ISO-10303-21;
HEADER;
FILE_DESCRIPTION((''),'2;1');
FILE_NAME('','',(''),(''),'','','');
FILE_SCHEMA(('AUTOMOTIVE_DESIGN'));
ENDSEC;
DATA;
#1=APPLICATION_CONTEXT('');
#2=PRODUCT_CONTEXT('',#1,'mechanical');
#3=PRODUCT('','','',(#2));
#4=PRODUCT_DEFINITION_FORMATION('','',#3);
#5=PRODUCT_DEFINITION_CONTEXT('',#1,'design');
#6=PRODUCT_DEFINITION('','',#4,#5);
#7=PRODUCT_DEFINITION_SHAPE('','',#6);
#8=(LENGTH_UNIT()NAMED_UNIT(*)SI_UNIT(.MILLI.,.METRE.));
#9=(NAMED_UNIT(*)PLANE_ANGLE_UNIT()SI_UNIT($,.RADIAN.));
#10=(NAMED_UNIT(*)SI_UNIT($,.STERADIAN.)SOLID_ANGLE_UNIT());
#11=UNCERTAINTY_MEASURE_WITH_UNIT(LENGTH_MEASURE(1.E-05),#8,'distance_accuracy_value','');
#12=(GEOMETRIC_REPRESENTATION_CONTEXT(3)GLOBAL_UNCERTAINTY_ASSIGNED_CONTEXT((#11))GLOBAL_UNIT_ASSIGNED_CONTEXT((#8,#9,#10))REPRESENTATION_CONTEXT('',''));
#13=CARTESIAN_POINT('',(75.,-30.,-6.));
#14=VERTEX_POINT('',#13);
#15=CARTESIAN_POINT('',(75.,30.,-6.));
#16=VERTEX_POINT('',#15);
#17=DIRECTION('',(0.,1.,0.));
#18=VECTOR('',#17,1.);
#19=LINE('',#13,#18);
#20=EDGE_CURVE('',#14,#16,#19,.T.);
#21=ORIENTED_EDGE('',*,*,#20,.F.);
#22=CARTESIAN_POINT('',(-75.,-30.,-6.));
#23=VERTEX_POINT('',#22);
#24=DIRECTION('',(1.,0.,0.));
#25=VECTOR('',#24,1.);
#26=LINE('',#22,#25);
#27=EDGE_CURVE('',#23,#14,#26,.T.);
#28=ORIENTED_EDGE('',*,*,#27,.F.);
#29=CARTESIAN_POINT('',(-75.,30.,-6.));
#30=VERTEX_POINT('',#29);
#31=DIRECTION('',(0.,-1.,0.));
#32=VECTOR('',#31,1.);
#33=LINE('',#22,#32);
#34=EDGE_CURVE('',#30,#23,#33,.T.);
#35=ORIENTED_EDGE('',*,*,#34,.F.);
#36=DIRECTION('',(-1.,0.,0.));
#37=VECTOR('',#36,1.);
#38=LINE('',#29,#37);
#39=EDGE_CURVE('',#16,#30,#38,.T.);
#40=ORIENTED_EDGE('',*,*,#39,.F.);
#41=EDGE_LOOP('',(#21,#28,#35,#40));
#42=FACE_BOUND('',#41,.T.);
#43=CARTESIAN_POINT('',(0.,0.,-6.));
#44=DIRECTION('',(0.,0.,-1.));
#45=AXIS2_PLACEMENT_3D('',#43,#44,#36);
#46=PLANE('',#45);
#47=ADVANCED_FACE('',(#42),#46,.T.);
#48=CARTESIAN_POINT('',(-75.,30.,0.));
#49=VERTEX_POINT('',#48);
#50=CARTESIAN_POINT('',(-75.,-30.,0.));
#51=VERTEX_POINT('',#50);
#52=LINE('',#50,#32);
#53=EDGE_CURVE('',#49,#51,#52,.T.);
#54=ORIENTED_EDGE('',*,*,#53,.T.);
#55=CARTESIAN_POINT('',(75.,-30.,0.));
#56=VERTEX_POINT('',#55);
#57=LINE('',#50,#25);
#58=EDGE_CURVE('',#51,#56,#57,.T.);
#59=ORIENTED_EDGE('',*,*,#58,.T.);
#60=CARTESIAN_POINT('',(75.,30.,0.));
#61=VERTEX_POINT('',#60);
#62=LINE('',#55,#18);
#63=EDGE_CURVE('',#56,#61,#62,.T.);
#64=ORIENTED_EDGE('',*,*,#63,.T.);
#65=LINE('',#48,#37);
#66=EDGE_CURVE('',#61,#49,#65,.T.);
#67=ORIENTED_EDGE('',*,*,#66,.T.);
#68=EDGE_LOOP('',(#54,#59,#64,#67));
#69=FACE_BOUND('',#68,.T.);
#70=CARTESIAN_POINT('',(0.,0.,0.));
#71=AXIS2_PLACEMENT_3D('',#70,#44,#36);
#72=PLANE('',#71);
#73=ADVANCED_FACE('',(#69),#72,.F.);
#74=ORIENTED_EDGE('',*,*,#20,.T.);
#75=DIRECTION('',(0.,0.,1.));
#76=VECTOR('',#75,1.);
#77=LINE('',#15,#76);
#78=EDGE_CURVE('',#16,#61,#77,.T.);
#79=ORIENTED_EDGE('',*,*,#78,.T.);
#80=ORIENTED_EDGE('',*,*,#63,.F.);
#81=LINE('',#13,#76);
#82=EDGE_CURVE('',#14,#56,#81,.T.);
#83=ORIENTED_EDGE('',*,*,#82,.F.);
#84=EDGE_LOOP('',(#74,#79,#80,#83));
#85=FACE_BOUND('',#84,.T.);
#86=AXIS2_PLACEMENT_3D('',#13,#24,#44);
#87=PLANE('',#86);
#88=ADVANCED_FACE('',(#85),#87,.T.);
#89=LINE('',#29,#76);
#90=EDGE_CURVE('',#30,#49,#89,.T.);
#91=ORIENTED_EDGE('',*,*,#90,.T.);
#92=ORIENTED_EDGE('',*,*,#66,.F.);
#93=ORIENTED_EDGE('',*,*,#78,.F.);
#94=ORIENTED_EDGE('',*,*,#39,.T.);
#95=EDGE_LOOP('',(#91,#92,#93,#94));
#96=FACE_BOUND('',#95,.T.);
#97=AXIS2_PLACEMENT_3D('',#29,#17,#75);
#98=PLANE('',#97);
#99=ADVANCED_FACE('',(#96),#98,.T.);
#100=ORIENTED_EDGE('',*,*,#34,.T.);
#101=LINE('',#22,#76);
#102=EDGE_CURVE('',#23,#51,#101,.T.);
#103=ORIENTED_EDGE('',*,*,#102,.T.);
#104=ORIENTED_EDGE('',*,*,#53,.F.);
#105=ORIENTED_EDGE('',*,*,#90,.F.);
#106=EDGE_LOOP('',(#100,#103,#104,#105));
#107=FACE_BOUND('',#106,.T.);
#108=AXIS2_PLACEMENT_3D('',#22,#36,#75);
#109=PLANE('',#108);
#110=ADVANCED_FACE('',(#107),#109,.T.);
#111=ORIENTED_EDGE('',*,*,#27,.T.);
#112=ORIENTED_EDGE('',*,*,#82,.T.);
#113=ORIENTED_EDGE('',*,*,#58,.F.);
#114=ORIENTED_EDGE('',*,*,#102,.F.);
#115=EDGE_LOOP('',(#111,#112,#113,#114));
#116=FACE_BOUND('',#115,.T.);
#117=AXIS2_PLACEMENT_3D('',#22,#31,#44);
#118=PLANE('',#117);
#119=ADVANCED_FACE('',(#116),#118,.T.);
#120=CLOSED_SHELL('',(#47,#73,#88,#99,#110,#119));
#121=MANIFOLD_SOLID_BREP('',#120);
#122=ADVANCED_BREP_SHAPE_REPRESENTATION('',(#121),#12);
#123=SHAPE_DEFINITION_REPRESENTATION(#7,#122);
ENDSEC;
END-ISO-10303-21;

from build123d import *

# Parameters (mm, degrees)
SKETCH_1_W             = 150
SKETCH_1_H             = 60
SM_BASE_FLANGE_1_DEPTH = 6


# Sheet-metal steps are written as plain solids
with BuildPart() as part:
    # Sketch 1 → Базовая кромка1 (new body)
    with BuildSketch(Plane.XY):
        Rectangle(SKETCH_1_W, SKETCH_1_H)
    extrude(amount=-SM_BASE_FLANGE_1_DEPTH)


solid = part.part
